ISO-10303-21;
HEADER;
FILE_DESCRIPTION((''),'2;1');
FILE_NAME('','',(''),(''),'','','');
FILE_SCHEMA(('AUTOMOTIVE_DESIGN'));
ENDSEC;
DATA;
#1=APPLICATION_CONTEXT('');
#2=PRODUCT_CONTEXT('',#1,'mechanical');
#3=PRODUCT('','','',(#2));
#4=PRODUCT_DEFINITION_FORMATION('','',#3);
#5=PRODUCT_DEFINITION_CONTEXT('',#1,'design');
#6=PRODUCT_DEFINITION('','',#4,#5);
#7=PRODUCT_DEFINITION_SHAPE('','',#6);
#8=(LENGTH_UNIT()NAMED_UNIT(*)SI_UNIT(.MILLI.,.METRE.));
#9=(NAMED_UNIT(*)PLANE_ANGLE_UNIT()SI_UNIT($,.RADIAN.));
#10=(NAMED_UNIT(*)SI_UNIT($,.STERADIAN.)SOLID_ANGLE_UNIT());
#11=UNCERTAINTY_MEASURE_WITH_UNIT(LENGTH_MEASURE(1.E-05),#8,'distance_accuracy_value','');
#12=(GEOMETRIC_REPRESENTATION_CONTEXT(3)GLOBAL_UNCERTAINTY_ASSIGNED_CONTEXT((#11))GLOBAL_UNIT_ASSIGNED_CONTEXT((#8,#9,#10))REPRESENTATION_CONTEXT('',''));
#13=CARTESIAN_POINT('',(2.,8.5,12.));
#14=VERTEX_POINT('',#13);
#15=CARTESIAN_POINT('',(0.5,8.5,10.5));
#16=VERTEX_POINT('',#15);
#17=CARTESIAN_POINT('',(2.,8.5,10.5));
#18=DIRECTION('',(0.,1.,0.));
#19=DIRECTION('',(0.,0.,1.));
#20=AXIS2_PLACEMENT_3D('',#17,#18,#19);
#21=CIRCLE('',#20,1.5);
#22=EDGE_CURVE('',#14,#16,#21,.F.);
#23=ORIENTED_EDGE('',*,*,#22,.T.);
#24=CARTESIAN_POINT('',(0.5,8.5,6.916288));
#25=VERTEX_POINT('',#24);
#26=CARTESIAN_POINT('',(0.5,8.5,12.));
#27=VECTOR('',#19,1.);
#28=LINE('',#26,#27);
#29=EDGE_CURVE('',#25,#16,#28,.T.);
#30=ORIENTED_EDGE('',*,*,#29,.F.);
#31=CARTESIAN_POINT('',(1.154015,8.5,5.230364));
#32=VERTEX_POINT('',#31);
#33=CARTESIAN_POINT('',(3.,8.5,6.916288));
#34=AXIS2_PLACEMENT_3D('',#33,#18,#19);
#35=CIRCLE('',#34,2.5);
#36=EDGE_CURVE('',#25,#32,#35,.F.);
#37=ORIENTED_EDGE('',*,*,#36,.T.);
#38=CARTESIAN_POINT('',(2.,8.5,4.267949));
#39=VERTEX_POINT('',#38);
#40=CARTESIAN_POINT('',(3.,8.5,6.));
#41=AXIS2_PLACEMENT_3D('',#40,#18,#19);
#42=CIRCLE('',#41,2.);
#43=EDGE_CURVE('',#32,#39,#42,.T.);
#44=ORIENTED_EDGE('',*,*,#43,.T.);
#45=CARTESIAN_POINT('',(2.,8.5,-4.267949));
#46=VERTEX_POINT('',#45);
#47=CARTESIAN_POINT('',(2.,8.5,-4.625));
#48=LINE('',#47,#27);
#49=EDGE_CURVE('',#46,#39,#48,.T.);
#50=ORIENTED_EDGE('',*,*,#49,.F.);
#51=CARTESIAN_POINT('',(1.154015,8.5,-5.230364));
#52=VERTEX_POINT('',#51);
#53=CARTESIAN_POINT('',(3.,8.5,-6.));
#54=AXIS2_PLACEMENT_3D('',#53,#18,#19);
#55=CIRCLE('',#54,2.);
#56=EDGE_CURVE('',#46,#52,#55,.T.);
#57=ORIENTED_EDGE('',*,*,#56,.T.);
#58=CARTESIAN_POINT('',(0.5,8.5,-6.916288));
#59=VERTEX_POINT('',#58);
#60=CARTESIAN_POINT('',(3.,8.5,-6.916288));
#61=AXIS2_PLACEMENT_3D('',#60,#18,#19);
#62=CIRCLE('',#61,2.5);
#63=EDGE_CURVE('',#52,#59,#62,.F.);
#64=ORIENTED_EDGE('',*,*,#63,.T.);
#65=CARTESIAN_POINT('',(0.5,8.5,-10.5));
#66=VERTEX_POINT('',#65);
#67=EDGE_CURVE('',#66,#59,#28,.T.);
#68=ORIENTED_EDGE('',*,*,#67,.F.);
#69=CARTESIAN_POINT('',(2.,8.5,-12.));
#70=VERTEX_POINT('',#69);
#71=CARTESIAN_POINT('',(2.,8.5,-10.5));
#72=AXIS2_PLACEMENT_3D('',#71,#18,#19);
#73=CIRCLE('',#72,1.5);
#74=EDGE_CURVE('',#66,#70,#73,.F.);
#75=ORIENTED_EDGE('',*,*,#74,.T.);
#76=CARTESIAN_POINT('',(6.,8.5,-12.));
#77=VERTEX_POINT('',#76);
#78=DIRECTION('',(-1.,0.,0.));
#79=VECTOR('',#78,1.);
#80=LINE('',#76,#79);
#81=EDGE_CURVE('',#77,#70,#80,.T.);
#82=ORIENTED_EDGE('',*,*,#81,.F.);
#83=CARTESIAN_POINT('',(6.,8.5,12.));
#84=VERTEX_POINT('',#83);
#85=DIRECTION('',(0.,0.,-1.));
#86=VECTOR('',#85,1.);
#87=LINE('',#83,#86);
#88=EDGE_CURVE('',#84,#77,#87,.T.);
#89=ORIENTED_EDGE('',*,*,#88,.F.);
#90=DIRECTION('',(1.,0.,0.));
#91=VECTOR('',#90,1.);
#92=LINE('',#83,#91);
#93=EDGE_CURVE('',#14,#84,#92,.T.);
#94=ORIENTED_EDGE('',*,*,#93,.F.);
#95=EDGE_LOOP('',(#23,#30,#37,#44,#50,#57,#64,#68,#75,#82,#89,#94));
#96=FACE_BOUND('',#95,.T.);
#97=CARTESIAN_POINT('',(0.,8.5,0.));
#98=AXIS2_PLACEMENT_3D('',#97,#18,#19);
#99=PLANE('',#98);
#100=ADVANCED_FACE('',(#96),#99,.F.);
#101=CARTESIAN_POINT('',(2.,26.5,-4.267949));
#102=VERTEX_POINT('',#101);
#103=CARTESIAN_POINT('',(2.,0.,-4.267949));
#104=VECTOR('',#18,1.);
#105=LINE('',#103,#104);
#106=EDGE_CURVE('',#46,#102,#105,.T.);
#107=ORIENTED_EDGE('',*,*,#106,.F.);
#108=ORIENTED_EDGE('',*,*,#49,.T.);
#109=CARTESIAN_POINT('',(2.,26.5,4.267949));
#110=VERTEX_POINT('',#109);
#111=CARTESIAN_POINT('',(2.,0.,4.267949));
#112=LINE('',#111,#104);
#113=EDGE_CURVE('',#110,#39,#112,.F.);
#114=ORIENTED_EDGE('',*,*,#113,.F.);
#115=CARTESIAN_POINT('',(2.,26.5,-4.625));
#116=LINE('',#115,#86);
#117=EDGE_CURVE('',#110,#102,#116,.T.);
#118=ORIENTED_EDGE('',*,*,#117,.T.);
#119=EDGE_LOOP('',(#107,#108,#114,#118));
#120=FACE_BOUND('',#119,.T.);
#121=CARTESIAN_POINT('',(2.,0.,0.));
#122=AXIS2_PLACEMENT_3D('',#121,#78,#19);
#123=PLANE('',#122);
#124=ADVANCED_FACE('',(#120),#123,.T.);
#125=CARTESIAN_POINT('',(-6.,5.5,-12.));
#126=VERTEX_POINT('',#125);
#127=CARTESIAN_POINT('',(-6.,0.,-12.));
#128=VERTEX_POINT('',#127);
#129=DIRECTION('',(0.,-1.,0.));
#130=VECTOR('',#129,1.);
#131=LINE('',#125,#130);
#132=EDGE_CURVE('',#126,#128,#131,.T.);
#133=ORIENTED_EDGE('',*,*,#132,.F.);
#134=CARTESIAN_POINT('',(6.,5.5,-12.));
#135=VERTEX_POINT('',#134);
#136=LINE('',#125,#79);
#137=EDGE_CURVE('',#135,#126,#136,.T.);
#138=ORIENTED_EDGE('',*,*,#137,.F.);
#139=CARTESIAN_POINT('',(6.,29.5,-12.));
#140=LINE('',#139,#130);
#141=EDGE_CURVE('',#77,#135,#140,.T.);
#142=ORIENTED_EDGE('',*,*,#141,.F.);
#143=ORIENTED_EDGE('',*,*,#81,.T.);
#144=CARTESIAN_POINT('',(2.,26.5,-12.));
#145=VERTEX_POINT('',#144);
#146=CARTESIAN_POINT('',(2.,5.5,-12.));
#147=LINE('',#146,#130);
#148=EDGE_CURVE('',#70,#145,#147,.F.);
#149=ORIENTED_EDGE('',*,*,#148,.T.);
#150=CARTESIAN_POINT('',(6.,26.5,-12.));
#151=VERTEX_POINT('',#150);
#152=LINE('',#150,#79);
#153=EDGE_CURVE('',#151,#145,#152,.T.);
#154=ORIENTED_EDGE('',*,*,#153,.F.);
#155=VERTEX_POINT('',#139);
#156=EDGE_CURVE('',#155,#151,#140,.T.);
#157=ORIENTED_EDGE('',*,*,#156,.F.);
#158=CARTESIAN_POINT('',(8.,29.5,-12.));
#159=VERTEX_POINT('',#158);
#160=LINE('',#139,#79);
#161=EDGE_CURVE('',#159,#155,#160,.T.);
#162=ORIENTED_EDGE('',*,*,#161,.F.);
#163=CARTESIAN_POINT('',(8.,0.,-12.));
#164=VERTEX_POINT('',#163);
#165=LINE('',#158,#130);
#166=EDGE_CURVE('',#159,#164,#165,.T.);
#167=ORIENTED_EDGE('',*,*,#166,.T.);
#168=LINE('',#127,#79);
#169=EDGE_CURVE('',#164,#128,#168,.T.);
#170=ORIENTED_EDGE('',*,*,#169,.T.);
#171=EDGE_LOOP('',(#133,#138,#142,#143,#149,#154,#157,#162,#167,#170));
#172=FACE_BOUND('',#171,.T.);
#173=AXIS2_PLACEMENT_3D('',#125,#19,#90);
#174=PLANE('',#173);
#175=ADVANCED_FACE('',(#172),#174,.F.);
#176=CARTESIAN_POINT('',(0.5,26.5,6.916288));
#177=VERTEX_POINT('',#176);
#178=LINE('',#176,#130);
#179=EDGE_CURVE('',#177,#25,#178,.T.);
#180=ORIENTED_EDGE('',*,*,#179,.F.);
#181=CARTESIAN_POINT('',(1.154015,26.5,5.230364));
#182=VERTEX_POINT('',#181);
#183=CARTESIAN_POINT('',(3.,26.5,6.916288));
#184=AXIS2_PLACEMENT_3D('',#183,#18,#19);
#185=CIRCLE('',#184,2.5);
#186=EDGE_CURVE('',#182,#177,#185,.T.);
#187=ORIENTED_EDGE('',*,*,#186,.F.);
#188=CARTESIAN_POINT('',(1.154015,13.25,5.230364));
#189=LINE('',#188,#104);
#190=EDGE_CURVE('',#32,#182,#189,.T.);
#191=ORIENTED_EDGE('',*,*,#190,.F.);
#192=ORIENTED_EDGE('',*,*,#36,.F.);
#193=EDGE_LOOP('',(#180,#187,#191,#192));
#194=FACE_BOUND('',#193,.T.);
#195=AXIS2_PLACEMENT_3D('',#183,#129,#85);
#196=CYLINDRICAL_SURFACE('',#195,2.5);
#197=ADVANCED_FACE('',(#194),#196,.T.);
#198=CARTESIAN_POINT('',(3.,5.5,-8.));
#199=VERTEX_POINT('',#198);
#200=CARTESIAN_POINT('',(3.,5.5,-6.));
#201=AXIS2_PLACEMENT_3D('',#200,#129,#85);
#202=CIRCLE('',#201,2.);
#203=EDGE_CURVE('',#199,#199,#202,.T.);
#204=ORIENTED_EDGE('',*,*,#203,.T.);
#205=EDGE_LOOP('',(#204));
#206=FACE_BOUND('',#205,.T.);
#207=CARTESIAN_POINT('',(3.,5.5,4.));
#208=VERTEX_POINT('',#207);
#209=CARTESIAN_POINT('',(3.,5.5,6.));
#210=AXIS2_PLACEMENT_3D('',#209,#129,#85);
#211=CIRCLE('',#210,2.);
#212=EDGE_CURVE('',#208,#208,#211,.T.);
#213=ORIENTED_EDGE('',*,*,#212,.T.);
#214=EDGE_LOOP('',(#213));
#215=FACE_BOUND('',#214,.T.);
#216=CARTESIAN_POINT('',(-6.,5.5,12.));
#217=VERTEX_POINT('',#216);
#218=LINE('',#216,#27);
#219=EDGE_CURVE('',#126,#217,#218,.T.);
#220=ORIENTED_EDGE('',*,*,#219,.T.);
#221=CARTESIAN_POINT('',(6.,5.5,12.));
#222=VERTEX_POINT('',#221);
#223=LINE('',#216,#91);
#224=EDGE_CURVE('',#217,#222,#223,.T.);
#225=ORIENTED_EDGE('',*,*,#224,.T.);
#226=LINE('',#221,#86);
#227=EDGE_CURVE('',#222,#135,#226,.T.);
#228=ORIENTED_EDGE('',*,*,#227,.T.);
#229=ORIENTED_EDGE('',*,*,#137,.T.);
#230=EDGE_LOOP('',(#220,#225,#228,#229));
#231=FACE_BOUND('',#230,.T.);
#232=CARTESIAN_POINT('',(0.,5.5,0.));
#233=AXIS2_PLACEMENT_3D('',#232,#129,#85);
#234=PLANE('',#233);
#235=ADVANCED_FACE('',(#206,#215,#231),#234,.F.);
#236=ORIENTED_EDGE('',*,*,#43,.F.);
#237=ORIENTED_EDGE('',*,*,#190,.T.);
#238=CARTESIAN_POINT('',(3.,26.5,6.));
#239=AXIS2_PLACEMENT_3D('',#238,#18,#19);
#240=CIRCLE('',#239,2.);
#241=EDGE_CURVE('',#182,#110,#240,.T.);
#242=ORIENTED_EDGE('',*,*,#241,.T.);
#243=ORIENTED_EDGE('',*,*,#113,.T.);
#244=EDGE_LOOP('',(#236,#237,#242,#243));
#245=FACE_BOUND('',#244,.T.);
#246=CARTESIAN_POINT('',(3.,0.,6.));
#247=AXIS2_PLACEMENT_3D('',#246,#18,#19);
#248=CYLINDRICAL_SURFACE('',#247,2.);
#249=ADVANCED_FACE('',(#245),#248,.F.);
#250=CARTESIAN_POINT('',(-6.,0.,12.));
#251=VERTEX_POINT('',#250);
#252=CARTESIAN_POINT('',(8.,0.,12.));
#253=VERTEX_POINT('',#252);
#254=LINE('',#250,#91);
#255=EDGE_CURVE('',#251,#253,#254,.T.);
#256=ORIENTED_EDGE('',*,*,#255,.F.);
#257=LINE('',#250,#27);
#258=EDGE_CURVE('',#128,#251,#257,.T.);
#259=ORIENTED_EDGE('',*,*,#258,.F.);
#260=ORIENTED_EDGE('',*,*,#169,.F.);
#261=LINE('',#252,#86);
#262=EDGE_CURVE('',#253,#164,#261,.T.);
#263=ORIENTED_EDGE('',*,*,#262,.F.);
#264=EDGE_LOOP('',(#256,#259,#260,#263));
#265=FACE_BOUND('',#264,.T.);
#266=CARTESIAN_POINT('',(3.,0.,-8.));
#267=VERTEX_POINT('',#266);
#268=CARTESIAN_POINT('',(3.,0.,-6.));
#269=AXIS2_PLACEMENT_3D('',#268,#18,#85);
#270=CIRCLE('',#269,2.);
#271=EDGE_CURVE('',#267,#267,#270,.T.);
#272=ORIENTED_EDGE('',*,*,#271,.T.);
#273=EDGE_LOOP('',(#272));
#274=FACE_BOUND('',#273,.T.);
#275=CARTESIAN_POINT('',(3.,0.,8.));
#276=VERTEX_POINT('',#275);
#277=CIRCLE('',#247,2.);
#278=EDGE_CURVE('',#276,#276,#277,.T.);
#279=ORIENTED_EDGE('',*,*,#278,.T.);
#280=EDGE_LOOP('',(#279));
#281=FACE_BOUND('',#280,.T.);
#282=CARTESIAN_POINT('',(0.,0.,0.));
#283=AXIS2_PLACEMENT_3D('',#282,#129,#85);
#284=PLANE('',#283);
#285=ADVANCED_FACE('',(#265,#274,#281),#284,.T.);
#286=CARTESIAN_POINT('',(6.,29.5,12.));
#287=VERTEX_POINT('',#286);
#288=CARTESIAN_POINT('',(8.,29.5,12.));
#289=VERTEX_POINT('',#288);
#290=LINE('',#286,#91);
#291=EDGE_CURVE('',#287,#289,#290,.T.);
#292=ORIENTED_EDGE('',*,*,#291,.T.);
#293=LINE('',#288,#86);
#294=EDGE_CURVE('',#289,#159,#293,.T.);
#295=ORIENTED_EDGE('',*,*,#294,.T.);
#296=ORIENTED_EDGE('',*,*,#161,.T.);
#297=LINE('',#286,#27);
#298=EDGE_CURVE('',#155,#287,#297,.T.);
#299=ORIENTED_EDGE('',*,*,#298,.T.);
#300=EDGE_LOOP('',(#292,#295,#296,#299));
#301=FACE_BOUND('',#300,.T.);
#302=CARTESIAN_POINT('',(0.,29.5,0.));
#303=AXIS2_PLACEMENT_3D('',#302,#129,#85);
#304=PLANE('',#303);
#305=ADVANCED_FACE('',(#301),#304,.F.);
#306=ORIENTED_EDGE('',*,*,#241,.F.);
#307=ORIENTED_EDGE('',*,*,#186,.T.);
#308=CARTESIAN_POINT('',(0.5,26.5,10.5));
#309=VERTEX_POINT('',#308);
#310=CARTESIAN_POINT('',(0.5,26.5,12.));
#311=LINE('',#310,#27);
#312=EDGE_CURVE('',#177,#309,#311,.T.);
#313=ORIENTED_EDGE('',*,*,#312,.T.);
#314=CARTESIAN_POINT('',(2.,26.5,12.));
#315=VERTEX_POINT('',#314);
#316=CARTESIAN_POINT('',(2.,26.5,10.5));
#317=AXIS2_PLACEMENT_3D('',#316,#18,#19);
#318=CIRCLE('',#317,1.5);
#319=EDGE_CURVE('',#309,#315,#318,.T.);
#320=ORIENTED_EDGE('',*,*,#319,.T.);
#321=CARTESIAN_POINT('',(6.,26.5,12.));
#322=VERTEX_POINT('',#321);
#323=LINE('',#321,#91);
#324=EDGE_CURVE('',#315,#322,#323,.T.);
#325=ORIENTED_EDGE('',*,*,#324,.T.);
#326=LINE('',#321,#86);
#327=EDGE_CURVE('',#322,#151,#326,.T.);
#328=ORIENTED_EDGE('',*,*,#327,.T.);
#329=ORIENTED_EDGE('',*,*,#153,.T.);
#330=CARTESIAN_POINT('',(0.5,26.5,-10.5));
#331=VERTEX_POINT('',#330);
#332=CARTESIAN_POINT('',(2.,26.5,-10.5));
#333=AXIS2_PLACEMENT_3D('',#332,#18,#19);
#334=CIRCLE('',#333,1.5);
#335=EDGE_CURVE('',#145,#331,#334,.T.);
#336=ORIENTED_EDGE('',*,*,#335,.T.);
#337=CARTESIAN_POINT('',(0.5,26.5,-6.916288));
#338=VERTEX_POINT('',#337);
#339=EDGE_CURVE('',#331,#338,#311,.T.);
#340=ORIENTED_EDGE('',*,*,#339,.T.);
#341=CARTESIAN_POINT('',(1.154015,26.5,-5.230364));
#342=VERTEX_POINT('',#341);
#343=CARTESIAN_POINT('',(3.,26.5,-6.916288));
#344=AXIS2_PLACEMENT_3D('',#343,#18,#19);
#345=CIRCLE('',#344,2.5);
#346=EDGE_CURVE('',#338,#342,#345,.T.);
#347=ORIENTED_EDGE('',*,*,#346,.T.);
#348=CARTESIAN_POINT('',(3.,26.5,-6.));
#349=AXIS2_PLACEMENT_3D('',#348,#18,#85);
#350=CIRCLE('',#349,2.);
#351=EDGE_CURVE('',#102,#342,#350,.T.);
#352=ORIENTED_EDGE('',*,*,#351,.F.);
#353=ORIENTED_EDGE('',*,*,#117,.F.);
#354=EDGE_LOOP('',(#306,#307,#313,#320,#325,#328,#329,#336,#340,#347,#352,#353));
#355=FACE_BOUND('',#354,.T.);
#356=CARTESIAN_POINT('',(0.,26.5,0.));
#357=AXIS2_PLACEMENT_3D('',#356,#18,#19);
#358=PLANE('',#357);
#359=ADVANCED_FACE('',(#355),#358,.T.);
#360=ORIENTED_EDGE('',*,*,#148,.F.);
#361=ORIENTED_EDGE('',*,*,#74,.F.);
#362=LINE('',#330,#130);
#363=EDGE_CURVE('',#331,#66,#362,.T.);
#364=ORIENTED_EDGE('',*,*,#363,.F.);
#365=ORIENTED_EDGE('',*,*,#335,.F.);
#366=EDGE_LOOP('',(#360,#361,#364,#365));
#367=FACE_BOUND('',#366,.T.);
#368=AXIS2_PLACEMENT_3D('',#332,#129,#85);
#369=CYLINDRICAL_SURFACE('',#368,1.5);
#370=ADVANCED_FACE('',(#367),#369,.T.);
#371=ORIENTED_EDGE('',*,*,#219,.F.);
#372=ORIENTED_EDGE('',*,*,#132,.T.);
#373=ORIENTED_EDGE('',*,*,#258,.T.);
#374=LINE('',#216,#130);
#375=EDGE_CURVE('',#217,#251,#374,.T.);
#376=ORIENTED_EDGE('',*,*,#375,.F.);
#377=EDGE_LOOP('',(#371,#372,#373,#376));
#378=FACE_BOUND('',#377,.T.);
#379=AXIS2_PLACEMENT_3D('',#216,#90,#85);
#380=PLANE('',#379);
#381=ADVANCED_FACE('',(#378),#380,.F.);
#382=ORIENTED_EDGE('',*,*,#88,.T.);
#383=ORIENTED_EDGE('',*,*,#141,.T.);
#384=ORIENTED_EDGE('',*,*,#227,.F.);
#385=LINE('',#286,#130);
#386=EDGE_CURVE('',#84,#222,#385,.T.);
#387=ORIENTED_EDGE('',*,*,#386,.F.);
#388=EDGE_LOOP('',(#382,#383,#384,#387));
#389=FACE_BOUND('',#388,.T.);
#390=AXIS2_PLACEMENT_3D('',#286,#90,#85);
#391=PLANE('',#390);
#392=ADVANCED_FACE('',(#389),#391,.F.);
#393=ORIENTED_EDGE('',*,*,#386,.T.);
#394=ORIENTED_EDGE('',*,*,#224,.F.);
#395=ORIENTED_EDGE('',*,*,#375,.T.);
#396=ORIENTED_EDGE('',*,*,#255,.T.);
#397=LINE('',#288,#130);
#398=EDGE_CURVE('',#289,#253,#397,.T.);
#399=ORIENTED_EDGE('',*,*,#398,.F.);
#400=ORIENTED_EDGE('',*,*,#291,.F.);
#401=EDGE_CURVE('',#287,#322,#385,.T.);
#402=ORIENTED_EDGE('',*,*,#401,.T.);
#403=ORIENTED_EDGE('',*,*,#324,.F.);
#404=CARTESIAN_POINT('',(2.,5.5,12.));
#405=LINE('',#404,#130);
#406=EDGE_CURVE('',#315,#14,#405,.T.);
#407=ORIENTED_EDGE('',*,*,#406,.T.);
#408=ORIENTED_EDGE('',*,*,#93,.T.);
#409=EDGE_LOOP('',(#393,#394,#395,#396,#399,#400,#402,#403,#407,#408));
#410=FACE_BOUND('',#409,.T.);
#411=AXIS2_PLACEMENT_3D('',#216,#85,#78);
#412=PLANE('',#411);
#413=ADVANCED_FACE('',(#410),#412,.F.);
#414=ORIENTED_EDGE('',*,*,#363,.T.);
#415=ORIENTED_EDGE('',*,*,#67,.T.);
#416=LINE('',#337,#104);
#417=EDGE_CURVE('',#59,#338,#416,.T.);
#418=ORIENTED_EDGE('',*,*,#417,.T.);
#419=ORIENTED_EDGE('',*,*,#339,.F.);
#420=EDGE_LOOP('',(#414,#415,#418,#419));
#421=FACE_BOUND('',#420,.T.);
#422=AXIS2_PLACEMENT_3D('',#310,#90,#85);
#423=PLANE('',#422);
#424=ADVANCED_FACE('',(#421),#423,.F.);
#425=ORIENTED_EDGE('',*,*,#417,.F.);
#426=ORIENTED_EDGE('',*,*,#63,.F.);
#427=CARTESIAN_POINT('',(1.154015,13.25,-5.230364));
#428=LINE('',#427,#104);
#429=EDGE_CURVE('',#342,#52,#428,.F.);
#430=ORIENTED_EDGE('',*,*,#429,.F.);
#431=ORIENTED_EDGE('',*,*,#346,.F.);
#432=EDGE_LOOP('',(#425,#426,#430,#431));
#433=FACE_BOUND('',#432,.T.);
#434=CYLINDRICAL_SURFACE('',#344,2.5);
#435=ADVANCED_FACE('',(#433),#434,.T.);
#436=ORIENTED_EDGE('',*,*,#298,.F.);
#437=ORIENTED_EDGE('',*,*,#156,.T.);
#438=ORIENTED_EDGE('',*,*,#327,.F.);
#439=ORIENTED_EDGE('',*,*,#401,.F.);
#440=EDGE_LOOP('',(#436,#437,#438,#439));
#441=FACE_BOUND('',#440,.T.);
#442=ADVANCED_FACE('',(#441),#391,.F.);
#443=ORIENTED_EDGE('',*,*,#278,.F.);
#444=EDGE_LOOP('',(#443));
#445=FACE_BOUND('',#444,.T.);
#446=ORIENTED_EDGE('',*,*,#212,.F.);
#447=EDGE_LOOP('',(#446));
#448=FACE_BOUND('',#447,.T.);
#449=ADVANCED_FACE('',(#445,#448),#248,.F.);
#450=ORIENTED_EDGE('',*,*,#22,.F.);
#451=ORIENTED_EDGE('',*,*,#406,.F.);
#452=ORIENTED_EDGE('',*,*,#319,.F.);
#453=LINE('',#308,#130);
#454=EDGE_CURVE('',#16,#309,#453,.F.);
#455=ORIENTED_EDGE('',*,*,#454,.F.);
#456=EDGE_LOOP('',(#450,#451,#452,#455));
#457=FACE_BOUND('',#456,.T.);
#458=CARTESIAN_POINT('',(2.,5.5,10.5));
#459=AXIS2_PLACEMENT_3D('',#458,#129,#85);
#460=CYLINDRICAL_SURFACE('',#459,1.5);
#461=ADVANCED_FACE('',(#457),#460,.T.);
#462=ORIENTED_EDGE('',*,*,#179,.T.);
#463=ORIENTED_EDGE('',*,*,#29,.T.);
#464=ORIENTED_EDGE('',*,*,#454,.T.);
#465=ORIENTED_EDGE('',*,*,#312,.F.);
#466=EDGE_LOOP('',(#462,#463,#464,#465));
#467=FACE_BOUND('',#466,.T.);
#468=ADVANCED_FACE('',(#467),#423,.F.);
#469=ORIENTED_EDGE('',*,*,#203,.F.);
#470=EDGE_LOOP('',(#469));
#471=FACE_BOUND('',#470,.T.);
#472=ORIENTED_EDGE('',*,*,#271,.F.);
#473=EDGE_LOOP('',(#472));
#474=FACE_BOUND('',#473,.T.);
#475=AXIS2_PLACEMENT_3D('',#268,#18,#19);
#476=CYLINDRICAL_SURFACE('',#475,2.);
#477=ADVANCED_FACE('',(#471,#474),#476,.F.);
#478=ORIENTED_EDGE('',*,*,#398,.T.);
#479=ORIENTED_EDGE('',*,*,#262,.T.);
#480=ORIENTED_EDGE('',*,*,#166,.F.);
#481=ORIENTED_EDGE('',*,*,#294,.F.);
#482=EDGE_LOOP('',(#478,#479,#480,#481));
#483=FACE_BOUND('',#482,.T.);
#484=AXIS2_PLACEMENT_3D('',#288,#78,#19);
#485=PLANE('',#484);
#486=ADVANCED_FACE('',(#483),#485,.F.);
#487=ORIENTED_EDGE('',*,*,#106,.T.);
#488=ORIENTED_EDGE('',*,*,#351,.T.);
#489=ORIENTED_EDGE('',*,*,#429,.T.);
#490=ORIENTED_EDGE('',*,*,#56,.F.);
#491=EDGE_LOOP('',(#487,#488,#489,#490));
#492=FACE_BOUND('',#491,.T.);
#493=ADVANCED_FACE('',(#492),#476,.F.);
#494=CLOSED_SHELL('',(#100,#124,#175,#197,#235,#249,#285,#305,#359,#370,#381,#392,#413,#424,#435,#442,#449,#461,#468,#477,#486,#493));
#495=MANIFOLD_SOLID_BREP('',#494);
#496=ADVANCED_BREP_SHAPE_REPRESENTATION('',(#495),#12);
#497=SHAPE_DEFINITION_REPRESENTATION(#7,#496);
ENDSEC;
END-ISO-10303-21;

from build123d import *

# Parameters (mm, degrees)
SKETCH1_W           = 12
SKETCH1_H           = 24
BOSS_EXTRUDE1_DEPTH = 5.5
SKETCH2_W           = 2
SKETCH2_H           = 24
BOSS_EXTRUDE2_DEPTH = 29.5
BOSS_EXTRUDE4_START = 3
SKETCH4_W           = 5.5
SKETCH4_H           = 24
BOSS_EXTRUDE4_DEPTH = 18
SKETCH5_W           = 9.25
SKETCH5_H           = 18
CUT_EXTRUDE1_DEPTH  = 1.5
FILLET1_R           = 2.5
SKETCH6_R           = 2
CUT_EXTRUDE2_DEPTH  = 31.170349683
FILLET2_R           = 1.5


with BuildPart() as part:
    # Sketch1 → Boss-Extrude1 (new body)
    with BuildSketch(Plane(origin=(0, 0, 0), x_dir=(1, 0, 0), z_dir=(0, 1, 0))):
        Rectangle(SKETCH1_W, SKETCH1_H)
    extrude(amount=BOSS_EXTRUDE1_DEPTH)

    # Sketch2 → Boss-Extrude2 (add)
    with BuildSketch(Plane(origin=(0, 0, 0), x_dir=(1, 0, 0), z_dir=(0, 1, 0))):
        with Locations((7, 0)):
            Rectangle(SKETCH2_W, SKETCH2_H)
    extrude(amount=BOSS_EXTRUDE2_DEPTH)

    # Sketch4 → Boss-Extrude4 (add)
    with BuildSketch(Plane(origin=(0, 5.5, 0), x_dir=(1, 0, 0), z_dir=(0, 1, 0)).offset(BOSS_EXTRUDE4_START)):
        with Locations((3.25, 0)):
            Rectangle(SKETCH4_W, SKETCH4_H)
    extrude(amount=BOSS_EXTRUDE4_DEPTH)

    # Sketch5 → Cut-Extrude1 (cut)
    with BuildSketch(Plane.ZY.offset(-0.5)):
        with Locations((0, 17.5)):
            Rectangle(SKETCH5_W, SKETCH5_H)
    extrude(amount=-CUT_EXTRUDE1_DEPTH, mode=Mode.SUBTRACT)

    # Fillet1
    # the kernel refuses this fillet: 2.5 mm, written as the material it takes off along each edge
    with BuildSketch(Plane(origin=(0.5, 32.228219619, 4.625), x_dir=(0, 0, 1), z_dir=(0, -1, 0)), Plane(origin=(0.5, 8.5, -4.625), x_dir=(0, 0, -1), z_dir=(0, 1, 0))) as fillet1_piece_1:
        with BuildLine():
            CenterArc((2.291287847, -2.5), FILLET1_R, 90, 66.421821522)
            Line((0, -1.5), (0, 0))
            Line((0, 0), (2.291287847, 0))
        make_face()
    extrude(amount=23.728219619, mode=Mode.SUBTRACT)

    # Sketch6 → Cut-Extrude2 (cut, through all)
    with BuildSketch(Plane(origin=(0, 26.5, 0), x_dir=(1, 0, 0), z_dir=(0, 1, 0))):
        with Locations(Location((3, -6, 0), (0, 0, 270))):
            Circle(SKETCH6_R)
        with Locations(Location((3, 6, 0), (0, 0, 90))):
            Circle(SKETCH6_R)
    extrude(amount=-CUT_EXTRUDE2_DEPTH, mode=Mode.SUBTRACT)

    # Fillet2
    fillet2_edges = [part.edges().sort_by_distance(p)[0] for p in [
        (0.5, 17.5, -12),
        (0.5, 17.5, 12),
    ]]
    fillet(fillet2_edges, radius=FILLET2_R)


solid = part.part
